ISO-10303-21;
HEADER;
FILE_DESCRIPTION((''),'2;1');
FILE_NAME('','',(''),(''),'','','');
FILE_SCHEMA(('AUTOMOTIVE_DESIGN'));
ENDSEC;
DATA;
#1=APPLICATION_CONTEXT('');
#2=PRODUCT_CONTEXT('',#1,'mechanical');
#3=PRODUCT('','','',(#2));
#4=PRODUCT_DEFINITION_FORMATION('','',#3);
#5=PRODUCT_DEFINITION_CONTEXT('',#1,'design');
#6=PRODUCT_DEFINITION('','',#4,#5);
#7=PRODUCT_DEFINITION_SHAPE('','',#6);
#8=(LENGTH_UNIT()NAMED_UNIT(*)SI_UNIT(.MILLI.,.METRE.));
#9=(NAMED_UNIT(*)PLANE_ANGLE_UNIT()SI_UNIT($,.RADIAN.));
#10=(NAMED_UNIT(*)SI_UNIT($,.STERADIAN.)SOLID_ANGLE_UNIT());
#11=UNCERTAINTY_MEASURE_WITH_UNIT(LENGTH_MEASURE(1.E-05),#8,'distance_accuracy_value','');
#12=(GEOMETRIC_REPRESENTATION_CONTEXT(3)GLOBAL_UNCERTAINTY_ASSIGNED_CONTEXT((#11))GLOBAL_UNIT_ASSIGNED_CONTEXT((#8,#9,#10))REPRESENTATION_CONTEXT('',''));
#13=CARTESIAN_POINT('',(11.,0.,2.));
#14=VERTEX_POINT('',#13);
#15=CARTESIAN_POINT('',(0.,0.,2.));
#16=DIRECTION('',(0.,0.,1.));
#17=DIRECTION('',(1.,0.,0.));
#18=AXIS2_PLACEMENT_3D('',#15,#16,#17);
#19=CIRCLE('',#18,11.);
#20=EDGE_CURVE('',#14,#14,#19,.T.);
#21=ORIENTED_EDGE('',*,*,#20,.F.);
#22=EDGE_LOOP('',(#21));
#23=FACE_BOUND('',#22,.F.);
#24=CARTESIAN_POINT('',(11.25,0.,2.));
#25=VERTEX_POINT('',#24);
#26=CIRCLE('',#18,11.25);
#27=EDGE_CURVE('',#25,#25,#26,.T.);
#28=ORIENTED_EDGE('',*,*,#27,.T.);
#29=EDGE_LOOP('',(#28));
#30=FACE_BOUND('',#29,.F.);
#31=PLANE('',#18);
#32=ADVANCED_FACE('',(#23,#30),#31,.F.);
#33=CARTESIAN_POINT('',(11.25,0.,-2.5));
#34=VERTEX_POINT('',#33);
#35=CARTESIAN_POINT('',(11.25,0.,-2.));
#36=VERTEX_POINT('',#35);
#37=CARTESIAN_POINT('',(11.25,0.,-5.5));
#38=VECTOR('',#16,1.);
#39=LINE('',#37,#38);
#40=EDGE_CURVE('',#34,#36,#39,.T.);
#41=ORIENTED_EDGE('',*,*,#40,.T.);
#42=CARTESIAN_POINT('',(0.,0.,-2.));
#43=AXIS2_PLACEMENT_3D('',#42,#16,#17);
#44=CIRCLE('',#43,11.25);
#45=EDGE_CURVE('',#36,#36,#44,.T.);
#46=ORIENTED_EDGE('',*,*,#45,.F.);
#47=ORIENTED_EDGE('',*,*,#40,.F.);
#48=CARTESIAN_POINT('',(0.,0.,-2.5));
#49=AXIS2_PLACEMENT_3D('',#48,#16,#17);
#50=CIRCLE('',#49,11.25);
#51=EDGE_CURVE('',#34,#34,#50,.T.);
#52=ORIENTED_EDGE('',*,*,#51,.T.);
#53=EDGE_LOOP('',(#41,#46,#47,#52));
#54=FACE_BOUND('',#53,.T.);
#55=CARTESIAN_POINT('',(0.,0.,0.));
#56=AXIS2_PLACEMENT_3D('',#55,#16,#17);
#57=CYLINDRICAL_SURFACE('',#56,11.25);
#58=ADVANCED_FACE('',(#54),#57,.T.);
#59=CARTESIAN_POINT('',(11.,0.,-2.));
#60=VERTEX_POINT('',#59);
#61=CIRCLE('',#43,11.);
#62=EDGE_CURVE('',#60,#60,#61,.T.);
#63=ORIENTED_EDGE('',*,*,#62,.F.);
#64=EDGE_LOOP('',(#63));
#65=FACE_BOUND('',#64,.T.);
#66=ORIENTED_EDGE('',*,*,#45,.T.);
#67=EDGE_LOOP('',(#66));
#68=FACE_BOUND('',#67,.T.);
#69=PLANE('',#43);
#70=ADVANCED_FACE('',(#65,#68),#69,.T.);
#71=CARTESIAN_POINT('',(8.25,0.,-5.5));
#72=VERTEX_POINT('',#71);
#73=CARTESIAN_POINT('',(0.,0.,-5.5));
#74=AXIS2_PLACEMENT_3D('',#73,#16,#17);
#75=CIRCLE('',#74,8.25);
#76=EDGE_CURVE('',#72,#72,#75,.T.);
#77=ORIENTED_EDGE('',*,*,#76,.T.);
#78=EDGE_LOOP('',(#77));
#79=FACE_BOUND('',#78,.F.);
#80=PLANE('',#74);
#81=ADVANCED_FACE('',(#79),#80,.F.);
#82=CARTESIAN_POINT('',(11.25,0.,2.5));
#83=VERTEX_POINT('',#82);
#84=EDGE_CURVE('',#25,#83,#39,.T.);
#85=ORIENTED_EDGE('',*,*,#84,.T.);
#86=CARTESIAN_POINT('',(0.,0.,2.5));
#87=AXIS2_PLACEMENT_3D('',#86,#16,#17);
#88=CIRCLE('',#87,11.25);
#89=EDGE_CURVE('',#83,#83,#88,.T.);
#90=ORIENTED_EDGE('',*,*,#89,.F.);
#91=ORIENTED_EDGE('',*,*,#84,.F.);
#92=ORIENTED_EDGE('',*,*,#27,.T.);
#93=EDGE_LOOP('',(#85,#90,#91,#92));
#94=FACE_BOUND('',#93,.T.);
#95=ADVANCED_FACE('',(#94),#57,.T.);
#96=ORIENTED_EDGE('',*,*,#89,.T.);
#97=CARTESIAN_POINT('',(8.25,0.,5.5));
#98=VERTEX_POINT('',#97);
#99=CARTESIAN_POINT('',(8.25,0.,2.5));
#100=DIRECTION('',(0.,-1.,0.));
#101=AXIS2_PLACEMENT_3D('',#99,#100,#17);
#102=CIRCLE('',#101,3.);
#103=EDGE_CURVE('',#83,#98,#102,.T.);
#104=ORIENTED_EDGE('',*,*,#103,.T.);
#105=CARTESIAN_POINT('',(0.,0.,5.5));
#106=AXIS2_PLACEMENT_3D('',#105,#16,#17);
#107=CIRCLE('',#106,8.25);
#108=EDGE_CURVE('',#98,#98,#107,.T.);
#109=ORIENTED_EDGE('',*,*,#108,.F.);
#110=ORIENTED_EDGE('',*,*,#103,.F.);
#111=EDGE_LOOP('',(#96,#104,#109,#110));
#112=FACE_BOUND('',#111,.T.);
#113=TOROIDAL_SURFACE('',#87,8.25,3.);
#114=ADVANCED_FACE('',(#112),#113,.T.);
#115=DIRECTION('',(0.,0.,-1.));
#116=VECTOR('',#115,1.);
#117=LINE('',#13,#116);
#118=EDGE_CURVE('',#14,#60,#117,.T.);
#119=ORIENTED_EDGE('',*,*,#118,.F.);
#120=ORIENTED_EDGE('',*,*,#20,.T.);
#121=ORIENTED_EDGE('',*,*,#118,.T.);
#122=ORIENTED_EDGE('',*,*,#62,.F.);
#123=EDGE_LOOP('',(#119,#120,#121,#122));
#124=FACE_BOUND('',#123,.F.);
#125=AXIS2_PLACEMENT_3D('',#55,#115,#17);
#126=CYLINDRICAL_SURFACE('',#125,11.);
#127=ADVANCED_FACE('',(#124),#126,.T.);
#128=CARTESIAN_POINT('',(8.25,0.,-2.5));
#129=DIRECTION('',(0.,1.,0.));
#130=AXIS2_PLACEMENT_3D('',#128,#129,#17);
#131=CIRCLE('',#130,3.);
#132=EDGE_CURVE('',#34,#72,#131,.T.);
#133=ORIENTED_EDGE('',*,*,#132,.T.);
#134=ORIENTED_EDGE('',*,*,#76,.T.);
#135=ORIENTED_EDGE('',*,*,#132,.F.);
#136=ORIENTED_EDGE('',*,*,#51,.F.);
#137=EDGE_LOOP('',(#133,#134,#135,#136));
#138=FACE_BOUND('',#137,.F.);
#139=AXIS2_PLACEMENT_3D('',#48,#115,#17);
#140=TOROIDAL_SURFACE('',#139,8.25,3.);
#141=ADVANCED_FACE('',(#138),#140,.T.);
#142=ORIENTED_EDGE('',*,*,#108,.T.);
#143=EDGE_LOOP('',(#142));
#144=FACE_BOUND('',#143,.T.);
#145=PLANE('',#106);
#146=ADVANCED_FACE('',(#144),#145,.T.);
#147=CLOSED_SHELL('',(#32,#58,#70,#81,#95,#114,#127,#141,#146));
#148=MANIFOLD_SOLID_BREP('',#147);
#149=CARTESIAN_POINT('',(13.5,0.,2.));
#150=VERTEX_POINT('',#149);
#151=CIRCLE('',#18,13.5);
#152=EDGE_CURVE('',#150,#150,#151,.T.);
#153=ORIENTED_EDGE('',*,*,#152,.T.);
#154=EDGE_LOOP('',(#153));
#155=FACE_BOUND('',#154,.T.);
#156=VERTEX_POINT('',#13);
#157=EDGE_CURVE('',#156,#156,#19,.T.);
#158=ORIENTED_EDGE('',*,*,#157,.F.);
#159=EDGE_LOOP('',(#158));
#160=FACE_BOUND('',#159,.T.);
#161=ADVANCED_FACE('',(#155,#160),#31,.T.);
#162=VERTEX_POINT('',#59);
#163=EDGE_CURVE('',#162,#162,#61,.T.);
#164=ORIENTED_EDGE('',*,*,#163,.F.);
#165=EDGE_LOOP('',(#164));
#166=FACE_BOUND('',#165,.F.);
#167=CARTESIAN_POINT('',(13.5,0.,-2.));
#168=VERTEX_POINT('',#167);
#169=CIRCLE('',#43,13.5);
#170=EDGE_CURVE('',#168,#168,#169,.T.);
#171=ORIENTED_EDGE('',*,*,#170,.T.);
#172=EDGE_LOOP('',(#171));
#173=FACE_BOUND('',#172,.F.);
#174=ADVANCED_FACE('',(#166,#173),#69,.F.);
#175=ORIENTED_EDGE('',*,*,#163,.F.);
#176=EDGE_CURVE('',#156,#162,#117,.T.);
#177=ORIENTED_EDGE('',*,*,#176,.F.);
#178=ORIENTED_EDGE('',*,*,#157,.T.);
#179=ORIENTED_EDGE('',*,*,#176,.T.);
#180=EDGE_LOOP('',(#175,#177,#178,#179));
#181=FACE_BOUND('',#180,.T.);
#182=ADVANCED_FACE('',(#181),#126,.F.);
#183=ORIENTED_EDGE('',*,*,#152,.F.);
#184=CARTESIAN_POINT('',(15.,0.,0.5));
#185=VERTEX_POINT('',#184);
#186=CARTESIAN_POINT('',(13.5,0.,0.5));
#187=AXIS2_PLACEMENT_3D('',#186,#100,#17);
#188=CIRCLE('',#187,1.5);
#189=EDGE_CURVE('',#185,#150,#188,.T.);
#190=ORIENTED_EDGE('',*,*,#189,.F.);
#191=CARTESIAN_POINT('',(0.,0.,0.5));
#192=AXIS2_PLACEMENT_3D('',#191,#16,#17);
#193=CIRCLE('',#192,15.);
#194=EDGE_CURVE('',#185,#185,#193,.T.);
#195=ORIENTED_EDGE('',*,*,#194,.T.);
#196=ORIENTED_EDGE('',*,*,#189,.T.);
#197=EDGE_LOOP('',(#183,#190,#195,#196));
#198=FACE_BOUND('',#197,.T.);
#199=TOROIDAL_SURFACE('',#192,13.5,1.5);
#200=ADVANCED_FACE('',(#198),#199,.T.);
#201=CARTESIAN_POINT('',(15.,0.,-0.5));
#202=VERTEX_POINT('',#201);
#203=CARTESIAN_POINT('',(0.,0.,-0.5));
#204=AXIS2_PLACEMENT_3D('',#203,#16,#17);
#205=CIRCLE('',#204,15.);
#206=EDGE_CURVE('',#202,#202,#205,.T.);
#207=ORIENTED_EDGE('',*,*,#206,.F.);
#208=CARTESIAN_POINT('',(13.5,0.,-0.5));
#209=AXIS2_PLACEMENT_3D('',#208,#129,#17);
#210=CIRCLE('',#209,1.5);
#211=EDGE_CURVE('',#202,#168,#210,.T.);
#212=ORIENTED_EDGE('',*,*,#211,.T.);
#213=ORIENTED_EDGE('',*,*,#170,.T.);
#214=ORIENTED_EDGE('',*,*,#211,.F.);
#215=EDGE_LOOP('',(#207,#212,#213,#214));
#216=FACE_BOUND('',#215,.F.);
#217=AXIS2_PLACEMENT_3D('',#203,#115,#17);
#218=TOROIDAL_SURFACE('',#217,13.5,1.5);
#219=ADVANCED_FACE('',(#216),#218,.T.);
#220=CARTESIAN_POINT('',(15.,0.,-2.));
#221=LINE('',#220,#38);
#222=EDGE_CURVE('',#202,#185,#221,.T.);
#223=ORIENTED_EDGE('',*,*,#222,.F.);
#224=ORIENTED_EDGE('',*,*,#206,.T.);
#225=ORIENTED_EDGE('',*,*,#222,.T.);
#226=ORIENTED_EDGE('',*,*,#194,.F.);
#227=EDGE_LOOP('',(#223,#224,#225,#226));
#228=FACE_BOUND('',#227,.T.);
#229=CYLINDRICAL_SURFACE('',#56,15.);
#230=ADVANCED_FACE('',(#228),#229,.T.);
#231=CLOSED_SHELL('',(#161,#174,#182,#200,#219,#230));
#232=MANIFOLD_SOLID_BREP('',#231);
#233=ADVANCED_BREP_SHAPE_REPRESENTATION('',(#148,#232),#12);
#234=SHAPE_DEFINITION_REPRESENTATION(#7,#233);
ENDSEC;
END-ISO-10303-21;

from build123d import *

# Parameters (mm, degrees)
F2_R     = 15
F2_R_2   = 11
F3_DEPTH = 2
F4_R     = 11.25
F5_DEPTH = 5.5
F6_R     = 3
F9_R     = 1.5


with BuildPart() as f3:
    # F2 (on Top) → F3 (new body, symmetric)
    with BuildSketch(Plane.XY):
        Circle(F2_R)
        Circle(F2_R_2, mode=Mode.SUBTRACT)
    extrude(amount=F3_DEPTH, both=True)


with BuildPart() as f5:
    # F4 (on Top) → F5 (new body, symmetric)
    with BuildSketch(Plane.XY):
        Circle(F4_R)
    extrude(amount=F5_DEPTH, both=True)

    # F6
    f6_edges = [f5.edges().sort_by_distance(p)[0] for p in [
        (-11.25, 0, 5.5),
        (-11.25, 0, -5.5),
    ]]
    fillet(f6_edges, radius=F6_R)


with BuildPart() as f7_1:
    # F7: copy of F3
    add(f3.part)


with BuildPart() as f5_1:
    add(f5.part)

    # F8: cut F7_1
    add(f7_1.part, mode=Mode.SUBTRACT)


with BuildPart() as f3_1:
    add(f3.part)

    # F9
    f9_edges = [f3_1.edges().sort_by_distance(p)[0] for p in [
        (-15, 0, -2),
        (15, 0, 0),
        (-15, 0, 2),
    ]]
    fillet(f9_edges, radius=F9_R)


solid = Compound([f5_1.part, f3_1.part])
